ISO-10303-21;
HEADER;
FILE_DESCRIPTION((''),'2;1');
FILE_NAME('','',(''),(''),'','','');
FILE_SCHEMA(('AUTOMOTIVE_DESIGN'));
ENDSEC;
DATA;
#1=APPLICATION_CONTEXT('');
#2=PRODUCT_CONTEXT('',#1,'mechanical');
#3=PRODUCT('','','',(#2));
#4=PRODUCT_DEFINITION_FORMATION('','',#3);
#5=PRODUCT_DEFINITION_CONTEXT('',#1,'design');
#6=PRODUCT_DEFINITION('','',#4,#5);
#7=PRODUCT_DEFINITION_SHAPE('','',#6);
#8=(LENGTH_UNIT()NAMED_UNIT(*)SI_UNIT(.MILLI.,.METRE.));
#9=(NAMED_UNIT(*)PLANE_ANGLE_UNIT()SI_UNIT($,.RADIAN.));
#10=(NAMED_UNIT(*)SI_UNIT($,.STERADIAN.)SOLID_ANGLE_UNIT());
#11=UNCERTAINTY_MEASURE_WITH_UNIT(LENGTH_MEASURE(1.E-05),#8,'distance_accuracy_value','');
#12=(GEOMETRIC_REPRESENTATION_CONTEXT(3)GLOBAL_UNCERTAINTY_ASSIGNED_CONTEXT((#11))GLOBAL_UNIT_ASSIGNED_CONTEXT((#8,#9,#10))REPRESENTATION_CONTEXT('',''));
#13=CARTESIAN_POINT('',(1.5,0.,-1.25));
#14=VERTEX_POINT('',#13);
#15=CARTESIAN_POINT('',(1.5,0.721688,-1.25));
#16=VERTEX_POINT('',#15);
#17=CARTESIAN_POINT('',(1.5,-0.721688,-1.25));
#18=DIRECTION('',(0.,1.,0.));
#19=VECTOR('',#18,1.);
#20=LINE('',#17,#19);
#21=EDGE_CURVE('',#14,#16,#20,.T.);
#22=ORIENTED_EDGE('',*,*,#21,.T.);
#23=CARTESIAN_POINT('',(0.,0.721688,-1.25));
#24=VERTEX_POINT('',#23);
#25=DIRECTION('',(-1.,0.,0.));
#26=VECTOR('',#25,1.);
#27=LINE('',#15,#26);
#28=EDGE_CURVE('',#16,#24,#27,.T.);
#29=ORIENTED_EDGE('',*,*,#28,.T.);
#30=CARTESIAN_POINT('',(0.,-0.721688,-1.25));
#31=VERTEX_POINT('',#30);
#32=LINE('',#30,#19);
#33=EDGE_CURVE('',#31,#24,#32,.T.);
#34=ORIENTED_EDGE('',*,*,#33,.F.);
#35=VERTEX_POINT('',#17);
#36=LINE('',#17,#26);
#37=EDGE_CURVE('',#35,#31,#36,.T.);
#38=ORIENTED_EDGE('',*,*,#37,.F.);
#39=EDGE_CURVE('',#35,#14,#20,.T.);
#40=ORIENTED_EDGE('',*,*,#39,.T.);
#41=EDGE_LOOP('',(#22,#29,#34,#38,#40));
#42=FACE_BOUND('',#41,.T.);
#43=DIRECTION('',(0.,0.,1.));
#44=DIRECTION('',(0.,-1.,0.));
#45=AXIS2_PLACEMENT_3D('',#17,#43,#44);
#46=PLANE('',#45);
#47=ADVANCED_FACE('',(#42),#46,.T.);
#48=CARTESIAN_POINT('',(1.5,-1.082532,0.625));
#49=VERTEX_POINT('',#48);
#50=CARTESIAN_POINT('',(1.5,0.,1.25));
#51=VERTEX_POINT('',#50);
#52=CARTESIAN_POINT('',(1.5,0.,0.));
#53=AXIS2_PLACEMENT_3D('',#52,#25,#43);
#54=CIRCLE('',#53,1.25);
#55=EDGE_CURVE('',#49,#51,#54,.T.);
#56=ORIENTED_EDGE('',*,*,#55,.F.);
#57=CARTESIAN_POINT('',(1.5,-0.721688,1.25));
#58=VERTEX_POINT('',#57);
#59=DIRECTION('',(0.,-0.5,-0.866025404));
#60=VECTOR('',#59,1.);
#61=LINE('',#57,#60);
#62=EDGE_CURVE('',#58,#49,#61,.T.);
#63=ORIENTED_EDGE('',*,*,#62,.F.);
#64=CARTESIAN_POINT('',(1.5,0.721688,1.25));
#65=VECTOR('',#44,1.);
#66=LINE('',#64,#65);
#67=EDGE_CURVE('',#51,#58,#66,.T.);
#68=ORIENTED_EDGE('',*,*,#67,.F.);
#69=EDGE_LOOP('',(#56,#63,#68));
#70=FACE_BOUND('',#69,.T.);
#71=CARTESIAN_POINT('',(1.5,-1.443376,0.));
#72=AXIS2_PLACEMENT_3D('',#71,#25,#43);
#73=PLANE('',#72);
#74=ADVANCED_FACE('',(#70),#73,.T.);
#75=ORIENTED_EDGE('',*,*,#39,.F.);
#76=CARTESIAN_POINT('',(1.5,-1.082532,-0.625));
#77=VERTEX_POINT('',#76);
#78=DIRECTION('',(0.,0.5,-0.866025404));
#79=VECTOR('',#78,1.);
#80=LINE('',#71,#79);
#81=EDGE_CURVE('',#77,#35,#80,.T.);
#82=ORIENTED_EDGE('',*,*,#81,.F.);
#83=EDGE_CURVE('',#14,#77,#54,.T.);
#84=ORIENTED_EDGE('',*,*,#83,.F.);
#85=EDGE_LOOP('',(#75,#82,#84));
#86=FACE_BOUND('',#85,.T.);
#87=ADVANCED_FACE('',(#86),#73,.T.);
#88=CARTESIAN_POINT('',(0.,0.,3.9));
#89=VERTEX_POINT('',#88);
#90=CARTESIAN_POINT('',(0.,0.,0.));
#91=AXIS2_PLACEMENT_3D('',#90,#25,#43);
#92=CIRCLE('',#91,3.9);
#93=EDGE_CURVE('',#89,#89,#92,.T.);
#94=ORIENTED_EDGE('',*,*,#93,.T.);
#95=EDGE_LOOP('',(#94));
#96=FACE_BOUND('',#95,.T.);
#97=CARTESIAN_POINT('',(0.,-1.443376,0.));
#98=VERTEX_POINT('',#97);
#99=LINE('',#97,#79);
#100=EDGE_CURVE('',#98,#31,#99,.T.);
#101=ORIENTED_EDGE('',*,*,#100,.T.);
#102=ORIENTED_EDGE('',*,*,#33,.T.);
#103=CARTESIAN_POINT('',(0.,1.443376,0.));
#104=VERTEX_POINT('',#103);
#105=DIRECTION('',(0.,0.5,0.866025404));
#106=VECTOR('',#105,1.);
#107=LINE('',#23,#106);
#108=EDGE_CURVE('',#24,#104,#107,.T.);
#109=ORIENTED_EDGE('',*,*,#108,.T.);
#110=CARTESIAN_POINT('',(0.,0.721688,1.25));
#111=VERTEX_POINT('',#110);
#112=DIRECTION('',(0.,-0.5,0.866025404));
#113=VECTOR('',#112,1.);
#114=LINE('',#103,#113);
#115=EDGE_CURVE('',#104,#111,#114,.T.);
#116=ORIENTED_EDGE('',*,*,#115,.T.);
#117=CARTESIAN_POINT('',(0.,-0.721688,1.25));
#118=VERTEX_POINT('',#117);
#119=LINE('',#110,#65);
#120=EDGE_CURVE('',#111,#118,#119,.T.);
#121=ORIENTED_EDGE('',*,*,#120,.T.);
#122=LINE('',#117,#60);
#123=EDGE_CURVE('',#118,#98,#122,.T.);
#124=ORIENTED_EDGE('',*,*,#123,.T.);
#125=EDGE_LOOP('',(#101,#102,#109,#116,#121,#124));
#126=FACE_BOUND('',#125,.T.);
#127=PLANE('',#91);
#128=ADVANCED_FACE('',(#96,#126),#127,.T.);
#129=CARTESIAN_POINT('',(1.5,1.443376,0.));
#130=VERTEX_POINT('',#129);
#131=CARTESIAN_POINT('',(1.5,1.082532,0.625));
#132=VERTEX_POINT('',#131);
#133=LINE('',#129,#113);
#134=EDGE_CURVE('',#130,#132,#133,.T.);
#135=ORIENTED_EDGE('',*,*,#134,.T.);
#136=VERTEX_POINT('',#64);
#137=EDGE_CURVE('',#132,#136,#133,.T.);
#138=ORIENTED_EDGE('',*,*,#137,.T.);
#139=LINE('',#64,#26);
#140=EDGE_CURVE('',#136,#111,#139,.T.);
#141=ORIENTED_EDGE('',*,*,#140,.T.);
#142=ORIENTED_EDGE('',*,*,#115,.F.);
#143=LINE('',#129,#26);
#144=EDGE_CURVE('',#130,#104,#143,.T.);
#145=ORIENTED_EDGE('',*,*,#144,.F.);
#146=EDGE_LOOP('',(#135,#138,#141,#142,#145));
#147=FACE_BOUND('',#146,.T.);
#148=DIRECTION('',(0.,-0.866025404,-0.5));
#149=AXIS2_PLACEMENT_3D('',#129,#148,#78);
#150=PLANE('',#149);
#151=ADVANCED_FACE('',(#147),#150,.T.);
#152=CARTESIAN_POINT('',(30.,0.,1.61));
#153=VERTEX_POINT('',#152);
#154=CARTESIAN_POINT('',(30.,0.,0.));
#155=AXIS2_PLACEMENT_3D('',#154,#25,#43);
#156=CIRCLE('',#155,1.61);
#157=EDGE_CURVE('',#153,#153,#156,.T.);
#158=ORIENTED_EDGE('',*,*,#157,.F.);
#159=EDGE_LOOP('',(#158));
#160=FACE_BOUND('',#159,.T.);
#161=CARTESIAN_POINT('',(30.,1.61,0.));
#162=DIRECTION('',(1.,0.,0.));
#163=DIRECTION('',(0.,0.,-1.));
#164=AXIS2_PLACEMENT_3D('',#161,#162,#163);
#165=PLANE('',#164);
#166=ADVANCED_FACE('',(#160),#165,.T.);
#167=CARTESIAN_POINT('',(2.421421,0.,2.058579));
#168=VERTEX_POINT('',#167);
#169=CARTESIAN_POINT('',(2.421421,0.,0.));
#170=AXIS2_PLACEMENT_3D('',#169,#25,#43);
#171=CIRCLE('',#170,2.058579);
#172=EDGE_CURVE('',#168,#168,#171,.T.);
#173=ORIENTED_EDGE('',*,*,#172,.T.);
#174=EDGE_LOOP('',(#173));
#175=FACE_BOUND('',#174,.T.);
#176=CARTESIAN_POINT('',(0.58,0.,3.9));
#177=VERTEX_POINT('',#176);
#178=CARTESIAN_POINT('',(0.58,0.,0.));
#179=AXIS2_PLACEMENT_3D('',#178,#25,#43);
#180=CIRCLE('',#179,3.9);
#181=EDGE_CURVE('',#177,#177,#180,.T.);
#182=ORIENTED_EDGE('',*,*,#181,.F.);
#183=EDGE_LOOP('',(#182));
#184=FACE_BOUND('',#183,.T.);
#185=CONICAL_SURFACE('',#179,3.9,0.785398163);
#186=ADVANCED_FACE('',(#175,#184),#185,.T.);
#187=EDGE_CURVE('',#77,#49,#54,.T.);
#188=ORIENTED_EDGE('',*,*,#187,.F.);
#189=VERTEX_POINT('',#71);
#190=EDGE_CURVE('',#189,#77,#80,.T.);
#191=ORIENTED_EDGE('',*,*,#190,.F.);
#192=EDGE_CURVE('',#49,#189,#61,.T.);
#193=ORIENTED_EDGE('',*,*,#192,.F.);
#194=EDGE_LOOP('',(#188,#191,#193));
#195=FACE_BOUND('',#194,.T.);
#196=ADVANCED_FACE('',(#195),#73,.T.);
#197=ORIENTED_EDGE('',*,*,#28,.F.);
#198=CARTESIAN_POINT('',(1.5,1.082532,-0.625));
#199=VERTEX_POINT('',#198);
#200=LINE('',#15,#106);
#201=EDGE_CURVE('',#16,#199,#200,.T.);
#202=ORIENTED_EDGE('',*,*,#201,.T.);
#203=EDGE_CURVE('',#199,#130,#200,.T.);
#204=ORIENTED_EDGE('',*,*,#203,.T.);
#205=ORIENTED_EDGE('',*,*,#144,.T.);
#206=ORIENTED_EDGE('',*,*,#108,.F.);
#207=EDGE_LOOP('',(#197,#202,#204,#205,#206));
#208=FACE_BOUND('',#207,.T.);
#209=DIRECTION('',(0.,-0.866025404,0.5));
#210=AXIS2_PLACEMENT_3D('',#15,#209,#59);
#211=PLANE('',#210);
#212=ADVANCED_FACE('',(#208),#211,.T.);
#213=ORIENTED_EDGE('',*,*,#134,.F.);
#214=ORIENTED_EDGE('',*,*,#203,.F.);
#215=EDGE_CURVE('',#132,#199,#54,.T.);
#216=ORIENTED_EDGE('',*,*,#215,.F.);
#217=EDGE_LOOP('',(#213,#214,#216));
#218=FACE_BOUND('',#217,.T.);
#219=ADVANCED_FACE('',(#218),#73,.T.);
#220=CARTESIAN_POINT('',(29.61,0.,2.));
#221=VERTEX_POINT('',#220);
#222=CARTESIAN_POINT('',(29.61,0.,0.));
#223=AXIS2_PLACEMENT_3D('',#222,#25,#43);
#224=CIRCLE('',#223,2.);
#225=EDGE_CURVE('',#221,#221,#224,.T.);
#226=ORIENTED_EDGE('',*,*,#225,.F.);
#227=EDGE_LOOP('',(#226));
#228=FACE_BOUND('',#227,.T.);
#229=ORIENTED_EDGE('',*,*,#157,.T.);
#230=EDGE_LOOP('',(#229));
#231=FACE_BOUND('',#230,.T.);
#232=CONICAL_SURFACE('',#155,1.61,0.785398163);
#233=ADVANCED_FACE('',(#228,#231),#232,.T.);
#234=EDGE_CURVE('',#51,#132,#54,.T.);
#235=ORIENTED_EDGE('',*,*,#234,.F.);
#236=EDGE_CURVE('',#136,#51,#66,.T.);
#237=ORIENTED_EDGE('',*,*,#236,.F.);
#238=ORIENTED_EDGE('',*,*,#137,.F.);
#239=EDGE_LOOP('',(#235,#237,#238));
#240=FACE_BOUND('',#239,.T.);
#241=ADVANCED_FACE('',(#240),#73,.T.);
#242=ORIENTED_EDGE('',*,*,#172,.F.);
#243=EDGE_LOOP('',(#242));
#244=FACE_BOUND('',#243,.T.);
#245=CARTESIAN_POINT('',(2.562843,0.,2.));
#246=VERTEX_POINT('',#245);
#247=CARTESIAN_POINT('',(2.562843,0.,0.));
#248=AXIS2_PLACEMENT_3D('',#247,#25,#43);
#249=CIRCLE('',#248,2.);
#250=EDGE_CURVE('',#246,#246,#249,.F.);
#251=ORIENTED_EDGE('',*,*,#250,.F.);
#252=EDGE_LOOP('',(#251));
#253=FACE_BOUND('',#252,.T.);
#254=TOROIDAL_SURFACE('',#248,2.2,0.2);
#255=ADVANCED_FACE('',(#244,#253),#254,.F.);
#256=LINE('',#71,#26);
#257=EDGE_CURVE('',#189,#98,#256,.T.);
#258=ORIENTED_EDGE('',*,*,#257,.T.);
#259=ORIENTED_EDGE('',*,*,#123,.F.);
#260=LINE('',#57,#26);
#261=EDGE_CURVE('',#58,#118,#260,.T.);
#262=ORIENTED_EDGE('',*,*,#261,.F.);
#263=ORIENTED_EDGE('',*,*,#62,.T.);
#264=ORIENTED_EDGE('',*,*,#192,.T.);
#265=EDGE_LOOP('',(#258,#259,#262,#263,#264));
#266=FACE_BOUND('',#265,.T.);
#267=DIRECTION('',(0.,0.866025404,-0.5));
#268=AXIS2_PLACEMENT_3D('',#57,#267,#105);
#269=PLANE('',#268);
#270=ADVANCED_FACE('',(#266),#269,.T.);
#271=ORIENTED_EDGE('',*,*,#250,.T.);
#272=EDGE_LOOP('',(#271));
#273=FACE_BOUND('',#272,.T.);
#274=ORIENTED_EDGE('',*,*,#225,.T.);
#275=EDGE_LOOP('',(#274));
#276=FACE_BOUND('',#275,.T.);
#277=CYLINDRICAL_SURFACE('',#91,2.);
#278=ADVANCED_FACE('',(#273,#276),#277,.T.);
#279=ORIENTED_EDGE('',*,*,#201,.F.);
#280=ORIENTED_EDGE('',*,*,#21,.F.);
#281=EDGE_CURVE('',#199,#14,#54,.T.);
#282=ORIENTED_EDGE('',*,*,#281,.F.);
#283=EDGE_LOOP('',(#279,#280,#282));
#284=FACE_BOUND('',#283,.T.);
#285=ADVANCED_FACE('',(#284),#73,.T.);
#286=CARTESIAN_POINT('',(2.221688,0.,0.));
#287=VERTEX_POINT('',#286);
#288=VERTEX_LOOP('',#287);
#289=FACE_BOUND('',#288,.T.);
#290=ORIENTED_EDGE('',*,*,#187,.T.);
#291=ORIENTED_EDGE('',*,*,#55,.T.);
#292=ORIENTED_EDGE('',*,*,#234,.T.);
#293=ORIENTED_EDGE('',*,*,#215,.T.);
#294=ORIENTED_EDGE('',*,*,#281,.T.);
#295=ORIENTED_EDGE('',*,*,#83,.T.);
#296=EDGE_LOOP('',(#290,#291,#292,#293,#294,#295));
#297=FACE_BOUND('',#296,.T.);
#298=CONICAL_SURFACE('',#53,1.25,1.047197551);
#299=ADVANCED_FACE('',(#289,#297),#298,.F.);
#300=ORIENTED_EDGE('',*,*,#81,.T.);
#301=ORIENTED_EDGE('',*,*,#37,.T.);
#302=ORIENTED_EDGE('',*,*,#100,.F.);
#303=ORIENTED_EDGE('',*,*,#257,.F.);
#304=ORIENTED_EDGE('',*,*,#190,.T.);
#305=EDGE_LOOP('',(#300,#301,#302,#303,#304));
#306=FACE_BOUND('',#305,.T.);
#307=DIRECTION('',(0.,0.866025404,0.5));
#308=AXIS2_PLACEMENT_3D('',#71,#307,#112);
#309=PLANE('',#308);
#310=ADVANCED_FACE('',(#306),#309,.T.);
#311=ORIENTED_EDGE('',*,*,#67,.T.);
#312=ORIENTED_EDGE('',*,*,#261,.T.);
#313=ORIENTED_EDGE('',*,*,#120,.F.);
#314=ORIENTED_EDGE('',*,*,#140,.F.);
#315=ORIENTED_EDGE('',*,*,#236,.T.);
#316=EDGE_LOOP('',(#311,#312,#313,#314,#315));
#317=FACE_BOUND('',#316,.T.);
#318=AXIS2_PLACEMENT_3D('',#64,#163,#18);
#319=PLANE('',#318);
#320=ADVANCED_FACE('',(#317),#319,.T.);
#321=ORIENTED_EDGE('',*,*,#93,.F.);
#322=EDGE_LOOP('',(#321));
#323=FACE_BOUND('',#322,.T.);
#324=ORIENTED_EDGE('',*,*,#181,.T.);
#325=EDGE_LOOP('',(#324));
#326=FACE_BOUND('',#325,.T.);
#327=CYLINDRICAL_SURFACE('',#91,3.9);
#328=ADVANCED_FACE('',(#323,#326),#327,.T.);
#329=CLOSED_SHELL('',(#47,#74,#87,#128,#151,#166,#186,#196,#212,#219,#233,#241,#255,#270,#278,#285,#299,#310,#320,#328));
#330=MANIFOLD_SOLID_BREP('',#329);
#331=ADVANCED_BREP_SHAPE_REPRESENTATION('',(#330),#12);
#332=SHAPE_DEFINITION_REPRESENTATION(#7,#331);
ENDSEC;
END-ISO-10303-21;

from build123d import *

# Parameters (mm, degrees)
FILLET1_R   = 0.2
HEX_START   = -1.5
HEX_2_DEPTH = 1.5


with BuildPart() as part:
    # BodySke → BaseBody (revolve)
    with BuildSketch(Plane.XY, mode=Mode.PRIVATE) as basebody_sk:
        Polygon((0, 0), (0, 3.9), (0.58, 3.9), (2.48, 2), (29.61, 2), (30, 1.61), (30, 0), align=None)
    revolve(basebody_sk.sketch.rotate(Axis((0, 0, 0), (1, 0, 0)), 90), axis=Axis((0, 0, 0), (1, 0, 0)))

    # Fillet1
    fillet1_edges = [part.edges().sort_by_distance(p)[0] for p in [
        (2.48, 0, -2),
    ]]
    fillet(fillet1_edges, radius=FILLET1_R)

    # Hex 2: read off the stored shape, not the designer's step
    # Hex 2 outline → Hex 2 (cut)
    with BuildSketch(Plane.ZY.offset(HEX_START)):
        Polygon((-1.25, -0.721687836), (0, -1.443375673), (1.25, -0.721687836), (1.25, 0.721687836), (0, 1.443375673), (-1.25, 0.721687836), align=None)
    extrude(amount=HEX_2_DEPTH, mode=Mode.SUBTRACT)

    # Hex 2 2 outline → Hex 2 2 (revolve, cut)
    with BuildSketch(Plane.YX):
        Polygon((1.25, 1.5), (0, 2.221687836), (0, 1.5), align=None)
    revolve(axis=Axis((0, 0, 0), (1, 0, 0)), mode=Mode.SUBTRACT)


solid = part.part
